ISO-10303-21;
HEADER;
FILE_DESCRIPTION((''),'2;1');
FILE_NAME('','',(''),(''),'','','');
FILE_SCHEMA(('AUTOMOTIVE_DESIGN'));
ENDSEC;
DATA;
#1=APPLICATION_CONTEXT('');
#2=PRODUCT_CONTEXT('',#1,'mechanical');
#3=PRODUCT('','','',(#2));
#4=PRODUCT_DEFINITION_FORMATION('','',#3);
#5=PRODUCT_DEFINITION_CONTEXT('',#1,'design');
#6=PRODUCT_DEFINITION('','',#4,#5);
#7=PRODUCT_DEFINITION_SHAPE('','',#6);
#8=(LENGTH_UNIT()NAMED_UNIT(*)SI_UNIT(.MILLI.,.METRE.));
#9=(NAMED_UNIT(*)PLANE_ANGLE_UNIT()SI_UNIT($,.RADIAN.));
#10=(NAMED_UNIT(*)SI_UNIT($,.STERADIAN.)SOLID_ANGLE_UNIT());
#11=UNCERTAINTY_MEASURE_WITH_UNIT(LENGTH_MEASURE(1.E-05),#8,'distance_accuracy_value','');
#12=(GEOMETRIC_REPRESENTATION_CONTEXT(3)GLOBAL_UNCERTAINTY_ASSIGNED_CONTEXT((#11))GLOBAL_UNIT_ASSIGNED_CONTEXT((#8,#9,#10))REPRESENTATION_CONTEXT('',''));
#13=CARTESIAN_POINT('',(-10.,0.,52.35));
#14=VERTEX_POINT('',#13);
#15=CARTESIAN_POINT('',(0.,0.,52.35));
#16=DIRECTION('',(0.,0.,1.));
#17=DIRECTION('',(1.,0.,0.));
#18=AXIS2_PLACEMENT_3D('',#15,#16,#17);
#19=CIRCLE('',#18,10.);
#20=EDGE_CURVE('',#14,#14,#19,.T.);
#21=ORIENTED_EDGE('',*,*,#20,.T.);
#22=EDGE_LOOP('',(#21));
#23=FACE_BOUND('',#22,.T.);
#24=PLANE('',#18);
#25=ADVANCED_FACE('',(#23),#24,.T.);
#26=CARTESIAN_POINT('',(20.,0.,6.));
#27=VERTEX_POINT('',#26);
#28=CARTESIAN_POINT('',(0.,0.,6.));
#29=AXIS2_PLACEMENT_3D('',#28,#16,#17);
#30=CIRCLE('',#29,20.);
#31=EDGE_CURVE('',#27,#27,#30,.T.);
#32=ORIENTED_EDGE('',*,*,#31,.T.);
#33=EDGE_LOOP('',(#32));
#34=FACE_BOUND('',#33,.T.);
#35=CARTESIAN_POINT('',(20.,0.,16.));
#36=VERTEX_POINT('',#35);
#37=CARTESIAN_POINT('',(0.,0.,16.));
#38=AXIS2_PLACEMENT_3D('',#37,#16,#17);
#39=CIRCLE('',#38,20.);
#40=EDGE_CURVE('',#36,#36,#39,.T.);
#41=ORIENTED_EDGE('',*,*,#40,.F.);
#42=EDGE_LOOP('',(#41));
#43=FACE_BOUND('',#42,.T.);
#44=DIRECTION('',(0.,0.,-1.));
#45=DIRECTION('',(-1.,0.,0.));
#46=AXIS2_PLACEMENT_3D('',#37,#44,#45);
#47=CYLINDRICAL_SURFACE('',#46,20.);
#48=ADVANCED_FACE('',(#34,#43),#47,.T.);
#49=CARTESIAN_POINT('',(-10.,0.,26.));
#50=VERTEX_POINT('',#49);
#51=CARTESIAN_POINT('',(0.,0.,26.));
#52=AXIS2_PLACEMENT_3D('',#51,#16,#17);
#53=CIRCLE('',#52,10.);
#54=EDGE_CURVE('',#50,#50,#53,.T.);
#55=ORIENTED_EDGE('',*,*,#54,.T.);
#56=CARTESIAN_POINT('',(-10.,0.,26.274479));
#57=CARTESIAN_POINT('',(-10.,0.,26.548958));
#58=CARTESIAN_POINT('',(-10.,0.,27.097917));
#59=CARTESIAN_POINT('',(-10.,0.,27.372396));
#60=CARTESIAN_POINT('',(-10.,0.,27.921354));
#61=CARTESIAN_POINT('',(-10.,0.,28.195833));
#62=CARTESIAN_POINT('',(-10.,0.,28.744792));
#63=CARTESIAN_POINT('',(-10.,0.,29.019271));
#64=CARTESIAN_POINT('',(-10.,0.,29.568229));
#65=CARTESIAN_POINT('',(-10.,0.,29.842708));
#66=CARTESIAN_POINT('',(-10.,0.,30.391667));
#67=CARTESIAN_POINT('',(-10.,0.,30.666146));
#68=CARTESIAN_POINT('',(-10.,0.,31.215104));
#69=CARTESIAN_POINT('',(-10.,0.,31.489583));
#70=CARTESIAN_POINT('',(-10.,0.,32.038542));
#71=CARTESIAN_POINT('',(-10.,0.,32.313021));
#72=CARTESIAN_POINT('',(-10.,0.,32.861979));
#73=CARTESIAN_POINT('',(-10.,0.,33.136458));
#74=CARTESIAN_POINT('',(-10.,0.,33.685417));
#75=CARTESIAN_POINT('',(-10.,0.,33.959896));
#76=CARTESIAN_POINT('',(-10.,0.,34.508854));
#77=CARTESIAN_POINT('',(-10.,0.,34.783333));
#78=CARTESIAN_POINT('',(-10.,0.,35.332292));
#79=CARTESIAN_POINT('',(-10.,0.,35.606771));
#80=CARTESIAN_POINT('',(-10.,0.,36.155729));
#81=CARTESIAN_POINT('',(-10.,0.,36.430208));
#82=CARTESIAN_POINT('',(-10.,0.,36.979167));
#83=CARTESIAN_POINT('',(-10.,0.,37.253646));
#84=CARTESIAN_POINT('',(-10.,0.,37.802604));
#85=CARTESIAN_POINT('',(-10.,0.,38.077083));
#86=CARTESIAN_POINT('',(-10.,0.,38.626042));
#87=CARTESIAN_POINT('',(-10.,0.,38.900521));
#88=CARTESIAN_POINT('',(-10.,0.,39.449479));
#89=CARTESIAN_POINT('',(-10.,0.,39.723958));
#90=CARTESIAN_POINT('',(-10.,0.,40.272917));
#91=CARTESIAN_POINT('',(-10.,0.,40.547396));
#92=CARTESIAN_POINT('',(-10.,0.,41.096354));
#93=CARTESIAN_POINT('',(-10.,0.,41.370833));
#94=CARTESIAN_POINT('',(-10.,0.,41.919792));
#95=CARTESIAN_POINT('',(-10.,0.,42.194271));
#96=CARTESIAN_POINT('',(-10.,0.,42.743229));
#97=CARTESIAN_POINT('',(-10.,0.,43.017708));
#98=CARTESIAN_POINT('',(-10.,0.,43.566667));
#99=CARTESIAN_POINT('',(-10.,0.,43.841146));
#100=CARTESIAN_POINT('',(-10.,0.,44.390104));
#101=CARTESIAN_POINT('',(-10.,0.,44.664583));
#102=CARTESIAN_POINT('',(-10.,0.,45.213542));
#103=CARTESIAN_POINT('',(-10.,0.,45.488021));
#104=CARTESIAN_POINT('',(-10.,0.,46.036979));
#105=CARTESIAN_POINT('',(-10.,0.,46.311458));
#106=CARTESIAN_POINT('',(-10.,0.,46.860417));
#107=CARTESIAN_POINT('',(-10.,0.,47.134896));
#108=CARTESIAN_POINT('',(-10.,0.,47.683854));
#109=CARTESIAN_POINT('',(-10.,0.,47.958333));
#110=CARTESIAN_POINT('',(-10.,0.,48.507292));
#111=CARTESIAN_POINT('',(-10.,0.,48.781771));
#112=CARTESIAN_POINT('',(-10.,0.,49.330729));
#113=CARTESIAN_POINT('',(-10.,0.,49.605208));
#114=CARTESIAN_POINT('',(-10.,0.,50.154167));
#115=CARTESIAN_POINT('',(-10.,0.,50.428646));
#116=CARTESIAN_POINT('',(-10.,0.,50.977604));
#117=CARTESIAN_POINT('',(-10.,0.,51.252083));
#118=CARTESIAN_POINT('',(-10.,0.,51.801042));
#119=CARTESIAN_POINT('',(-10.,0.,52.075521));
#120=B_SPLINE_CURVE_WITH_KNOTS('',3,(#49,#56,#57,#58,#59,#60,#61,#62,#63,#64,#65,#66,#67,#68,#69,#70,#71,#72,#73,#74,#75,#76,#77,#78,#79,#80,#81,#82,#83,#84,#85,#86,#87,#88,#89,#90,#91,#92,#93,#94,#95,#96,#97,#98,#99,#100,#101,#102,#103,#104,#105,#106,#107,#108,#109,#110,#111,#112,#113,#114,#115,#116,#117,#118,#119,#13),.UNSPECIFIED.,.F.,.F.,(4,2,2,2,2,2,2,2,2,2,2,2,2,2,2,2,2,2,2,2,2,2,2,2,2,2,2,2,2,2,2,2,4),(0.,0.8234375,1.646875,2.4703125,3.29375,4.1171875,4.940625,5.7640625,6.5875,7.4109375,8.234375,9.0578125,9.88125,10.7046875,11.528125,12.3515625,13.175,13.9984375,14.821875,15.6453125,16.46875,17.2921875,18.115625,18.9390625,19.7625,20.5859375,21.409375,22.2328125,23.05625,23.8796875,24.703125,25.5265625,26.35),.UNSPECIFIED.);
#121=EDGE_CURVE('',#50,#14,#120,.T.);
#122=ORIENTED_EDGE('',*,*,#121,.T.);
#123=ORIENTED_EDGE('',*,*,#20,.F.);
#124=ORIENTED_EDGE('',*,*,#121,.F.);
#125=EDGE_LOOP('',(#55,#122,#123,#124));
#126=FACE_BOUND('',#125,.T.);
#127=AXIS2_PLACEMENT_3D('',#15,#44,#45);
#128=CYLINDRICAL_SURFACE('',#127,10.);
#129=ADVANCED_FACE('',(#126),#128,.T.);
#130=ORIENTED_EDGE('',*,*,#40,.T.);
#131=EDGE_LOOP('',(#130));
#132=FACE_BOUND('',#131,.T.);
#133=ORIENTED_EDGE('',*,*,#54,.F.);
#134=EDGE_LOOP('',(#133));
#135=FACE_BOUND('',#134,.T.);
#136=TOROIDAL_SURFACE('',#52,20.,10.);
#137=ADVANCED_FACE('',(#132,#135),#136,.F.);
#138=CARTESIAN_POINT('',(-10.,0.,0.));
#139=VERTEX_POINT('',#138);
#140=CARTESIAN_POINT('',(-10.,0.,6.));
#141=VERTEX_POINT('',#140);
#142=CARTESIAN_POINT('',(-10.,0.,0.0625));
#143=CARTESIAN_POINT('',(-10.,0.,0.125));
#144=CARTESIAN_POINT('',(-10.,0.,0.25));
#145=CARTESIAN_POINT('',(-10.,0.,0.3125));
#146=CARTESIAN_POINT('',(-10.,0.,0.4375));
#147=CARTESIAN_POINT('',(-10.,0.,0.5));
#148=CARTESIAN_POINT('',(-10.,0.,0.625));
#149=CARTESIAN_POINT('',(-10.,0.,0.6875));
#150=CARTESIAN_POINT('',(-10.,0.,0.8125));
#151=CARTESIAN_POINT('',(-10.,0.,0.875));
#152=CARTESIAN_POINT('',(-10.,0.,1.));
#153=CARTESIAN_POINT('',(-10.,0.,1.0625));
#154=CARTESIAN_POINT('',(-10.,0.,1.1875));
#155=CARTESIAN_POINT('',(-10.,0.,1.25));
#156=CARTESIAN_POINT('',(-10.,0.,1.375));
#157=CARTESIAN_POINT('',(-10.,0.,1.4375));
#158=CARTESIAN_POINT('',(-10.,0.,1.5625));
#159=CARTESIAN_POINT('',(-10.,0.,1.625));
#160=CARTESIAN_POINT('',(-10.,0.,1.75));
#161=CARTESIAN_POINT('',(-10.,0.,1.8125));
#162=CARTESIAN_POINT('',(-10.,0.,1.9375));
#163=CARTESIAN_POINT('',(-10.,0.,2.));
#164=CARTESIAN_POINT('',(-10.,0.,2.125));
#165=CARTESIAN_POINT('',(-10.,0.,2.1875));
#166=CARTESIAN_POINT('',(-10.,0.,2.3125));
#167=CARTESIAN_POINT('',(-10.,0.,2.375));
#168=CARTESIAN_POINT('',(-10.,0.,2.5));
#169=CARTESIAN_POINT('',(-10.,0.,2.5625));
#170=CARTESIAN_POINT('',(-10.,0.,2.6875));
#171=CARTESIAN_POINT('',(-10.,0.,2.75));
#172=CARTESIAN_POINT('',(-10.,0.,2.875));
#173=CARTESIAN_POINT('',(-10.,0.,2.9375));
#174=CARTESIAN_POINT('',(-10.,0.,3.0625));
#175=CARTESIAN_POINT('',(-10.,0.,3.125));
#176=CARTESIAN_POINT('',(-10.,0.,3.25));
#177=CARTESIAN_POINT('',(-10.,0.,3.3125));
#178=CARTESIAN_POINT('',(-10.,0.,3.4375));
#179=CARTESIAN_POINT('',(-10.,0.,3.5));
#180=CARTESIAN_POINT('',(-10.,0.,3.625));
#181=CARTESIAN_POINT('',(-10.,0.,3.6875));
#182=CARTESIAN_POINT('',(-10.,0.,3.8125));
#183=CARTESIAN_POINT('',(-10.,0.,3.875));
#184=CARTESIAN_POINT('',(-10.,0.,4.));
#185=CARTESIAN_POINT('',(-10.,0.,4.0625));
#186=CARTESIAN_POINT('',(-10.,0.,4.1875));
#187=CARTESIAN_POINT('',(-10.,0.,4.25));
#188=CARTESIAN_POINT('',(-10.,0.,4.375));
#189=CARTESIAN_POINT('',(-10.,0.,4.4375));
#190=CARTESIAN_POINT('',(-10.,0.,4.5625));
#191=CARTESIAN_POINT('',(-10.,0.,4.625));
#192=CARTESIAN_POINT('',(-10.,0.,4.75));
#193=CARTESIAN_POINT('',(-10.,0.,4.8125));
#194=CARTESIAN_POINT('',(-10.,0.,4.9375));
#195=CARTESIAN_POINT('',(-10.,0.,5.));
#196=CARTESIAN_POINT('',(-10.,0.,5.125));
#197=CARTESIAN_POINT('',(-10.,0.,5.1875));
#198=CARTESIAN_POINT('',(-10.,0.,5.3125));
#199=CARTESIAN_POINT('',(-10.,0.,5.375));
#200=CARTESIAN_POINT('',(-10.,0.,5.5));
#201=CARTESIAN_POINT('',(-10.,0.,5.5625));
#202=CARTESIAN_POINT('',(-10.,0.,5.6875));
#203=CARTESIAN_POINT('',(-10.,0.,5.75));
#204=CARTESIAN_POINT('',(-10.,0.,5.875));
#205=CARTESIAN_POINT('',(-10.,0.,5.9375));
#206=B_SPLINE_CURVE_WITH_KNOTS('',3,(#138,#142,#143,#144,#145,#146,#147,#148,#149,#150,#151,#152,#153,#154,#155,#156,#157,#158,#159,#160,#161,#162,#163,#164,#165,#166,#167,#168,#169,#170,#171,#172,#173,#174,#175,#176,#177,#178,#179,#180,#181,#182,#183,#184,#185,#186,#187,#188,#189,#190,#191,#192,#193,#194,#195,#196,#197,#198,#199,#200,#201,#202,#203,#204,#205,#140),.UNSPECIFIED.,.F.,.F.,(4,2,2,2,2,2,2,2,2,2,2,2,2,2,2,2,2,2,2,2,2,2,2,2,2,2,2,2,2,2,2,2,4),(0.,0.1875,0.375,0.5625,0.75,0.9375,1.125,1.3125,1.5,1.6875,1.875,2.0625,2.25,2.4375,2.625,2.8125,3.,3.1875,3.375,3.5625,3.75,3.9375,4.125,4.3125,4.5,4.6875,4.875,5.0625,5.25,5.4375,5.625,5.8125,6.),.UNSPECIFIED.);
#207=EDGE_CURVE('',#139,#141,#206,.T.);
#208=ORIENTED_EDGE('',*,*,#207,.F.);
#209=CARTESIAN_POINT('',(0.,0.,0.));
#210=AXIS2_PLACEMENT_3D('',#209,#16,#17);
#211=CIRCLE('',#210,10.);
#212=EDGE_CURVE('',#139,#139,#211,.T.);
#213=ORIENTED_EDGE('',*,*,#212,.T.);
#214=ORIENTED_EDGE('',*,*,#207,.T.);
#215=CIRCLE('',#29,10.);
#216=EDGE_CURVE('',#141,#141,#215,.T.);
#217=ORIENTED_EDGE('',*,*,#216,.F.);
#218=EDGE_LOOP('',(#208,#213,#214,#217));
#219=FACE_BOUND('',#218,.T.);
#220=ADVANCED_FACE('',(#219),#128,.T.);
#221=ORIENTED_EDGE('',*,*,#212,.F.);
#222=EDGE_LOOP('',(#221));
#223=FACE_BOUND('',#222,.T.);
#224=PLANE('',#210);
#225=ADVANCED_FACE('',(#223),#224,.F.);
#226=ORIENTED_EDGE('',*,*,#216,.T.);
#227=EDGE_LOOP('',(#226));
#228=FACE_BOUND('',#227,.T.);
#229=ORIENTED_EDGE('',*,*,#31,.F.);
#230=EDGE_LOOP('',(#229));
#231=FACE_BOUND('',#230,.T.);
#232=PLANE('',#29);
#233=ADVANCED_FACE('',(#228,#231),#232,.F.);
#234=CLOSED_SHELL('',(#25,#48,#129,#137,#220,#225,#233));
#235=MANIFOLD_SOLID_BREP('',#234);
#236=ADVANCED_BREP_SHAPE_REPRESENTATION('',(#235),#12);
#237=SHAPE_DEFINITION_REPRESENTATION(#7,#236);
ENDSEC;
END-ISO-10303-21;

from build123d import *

# Parameters (mm, degrees)
ESQUISSE1_R        = 10
BOSS_EXTRU_1_DEPTH = 52.35
BOSS_EXTRU_2_START = 6
ESQUISSE2_R        = 20
BOSS_EXTRU_2_DEPTH = 10
CONG_1_R           = 10


with BuildPart() as part:
    # Esquisse1 → Boss.-Extru.1 (new body)
    with BuildSketch(Plane.XY):
        with Locations(Location((0, 0, 0), (0, 0, 180))):
            Circle(ESQUISSE1_R)
    extrude(amount=BOSS_EXTRU_1_DEPTH)

    # Esquisse2 → Boss.-Extru.2 (add)
    with BuildSketch(Plane.XY.offset(BOSS_EXTRU_2_START)):
        Circle(ESQUISSE2_R)
    extrude(amount=BOSS_EXTRU_2_DEPTH)

    # Congé1
    cong_1_edges = [part.edges().sort_by_distance(p)[0] for p in [
        (10, 0, 16),
    ]]
    fillet(cong_1_edges, radius=CONG_1_R - 0.0001)  # a hair under: the kernel refuses the full size


solid = part.part
